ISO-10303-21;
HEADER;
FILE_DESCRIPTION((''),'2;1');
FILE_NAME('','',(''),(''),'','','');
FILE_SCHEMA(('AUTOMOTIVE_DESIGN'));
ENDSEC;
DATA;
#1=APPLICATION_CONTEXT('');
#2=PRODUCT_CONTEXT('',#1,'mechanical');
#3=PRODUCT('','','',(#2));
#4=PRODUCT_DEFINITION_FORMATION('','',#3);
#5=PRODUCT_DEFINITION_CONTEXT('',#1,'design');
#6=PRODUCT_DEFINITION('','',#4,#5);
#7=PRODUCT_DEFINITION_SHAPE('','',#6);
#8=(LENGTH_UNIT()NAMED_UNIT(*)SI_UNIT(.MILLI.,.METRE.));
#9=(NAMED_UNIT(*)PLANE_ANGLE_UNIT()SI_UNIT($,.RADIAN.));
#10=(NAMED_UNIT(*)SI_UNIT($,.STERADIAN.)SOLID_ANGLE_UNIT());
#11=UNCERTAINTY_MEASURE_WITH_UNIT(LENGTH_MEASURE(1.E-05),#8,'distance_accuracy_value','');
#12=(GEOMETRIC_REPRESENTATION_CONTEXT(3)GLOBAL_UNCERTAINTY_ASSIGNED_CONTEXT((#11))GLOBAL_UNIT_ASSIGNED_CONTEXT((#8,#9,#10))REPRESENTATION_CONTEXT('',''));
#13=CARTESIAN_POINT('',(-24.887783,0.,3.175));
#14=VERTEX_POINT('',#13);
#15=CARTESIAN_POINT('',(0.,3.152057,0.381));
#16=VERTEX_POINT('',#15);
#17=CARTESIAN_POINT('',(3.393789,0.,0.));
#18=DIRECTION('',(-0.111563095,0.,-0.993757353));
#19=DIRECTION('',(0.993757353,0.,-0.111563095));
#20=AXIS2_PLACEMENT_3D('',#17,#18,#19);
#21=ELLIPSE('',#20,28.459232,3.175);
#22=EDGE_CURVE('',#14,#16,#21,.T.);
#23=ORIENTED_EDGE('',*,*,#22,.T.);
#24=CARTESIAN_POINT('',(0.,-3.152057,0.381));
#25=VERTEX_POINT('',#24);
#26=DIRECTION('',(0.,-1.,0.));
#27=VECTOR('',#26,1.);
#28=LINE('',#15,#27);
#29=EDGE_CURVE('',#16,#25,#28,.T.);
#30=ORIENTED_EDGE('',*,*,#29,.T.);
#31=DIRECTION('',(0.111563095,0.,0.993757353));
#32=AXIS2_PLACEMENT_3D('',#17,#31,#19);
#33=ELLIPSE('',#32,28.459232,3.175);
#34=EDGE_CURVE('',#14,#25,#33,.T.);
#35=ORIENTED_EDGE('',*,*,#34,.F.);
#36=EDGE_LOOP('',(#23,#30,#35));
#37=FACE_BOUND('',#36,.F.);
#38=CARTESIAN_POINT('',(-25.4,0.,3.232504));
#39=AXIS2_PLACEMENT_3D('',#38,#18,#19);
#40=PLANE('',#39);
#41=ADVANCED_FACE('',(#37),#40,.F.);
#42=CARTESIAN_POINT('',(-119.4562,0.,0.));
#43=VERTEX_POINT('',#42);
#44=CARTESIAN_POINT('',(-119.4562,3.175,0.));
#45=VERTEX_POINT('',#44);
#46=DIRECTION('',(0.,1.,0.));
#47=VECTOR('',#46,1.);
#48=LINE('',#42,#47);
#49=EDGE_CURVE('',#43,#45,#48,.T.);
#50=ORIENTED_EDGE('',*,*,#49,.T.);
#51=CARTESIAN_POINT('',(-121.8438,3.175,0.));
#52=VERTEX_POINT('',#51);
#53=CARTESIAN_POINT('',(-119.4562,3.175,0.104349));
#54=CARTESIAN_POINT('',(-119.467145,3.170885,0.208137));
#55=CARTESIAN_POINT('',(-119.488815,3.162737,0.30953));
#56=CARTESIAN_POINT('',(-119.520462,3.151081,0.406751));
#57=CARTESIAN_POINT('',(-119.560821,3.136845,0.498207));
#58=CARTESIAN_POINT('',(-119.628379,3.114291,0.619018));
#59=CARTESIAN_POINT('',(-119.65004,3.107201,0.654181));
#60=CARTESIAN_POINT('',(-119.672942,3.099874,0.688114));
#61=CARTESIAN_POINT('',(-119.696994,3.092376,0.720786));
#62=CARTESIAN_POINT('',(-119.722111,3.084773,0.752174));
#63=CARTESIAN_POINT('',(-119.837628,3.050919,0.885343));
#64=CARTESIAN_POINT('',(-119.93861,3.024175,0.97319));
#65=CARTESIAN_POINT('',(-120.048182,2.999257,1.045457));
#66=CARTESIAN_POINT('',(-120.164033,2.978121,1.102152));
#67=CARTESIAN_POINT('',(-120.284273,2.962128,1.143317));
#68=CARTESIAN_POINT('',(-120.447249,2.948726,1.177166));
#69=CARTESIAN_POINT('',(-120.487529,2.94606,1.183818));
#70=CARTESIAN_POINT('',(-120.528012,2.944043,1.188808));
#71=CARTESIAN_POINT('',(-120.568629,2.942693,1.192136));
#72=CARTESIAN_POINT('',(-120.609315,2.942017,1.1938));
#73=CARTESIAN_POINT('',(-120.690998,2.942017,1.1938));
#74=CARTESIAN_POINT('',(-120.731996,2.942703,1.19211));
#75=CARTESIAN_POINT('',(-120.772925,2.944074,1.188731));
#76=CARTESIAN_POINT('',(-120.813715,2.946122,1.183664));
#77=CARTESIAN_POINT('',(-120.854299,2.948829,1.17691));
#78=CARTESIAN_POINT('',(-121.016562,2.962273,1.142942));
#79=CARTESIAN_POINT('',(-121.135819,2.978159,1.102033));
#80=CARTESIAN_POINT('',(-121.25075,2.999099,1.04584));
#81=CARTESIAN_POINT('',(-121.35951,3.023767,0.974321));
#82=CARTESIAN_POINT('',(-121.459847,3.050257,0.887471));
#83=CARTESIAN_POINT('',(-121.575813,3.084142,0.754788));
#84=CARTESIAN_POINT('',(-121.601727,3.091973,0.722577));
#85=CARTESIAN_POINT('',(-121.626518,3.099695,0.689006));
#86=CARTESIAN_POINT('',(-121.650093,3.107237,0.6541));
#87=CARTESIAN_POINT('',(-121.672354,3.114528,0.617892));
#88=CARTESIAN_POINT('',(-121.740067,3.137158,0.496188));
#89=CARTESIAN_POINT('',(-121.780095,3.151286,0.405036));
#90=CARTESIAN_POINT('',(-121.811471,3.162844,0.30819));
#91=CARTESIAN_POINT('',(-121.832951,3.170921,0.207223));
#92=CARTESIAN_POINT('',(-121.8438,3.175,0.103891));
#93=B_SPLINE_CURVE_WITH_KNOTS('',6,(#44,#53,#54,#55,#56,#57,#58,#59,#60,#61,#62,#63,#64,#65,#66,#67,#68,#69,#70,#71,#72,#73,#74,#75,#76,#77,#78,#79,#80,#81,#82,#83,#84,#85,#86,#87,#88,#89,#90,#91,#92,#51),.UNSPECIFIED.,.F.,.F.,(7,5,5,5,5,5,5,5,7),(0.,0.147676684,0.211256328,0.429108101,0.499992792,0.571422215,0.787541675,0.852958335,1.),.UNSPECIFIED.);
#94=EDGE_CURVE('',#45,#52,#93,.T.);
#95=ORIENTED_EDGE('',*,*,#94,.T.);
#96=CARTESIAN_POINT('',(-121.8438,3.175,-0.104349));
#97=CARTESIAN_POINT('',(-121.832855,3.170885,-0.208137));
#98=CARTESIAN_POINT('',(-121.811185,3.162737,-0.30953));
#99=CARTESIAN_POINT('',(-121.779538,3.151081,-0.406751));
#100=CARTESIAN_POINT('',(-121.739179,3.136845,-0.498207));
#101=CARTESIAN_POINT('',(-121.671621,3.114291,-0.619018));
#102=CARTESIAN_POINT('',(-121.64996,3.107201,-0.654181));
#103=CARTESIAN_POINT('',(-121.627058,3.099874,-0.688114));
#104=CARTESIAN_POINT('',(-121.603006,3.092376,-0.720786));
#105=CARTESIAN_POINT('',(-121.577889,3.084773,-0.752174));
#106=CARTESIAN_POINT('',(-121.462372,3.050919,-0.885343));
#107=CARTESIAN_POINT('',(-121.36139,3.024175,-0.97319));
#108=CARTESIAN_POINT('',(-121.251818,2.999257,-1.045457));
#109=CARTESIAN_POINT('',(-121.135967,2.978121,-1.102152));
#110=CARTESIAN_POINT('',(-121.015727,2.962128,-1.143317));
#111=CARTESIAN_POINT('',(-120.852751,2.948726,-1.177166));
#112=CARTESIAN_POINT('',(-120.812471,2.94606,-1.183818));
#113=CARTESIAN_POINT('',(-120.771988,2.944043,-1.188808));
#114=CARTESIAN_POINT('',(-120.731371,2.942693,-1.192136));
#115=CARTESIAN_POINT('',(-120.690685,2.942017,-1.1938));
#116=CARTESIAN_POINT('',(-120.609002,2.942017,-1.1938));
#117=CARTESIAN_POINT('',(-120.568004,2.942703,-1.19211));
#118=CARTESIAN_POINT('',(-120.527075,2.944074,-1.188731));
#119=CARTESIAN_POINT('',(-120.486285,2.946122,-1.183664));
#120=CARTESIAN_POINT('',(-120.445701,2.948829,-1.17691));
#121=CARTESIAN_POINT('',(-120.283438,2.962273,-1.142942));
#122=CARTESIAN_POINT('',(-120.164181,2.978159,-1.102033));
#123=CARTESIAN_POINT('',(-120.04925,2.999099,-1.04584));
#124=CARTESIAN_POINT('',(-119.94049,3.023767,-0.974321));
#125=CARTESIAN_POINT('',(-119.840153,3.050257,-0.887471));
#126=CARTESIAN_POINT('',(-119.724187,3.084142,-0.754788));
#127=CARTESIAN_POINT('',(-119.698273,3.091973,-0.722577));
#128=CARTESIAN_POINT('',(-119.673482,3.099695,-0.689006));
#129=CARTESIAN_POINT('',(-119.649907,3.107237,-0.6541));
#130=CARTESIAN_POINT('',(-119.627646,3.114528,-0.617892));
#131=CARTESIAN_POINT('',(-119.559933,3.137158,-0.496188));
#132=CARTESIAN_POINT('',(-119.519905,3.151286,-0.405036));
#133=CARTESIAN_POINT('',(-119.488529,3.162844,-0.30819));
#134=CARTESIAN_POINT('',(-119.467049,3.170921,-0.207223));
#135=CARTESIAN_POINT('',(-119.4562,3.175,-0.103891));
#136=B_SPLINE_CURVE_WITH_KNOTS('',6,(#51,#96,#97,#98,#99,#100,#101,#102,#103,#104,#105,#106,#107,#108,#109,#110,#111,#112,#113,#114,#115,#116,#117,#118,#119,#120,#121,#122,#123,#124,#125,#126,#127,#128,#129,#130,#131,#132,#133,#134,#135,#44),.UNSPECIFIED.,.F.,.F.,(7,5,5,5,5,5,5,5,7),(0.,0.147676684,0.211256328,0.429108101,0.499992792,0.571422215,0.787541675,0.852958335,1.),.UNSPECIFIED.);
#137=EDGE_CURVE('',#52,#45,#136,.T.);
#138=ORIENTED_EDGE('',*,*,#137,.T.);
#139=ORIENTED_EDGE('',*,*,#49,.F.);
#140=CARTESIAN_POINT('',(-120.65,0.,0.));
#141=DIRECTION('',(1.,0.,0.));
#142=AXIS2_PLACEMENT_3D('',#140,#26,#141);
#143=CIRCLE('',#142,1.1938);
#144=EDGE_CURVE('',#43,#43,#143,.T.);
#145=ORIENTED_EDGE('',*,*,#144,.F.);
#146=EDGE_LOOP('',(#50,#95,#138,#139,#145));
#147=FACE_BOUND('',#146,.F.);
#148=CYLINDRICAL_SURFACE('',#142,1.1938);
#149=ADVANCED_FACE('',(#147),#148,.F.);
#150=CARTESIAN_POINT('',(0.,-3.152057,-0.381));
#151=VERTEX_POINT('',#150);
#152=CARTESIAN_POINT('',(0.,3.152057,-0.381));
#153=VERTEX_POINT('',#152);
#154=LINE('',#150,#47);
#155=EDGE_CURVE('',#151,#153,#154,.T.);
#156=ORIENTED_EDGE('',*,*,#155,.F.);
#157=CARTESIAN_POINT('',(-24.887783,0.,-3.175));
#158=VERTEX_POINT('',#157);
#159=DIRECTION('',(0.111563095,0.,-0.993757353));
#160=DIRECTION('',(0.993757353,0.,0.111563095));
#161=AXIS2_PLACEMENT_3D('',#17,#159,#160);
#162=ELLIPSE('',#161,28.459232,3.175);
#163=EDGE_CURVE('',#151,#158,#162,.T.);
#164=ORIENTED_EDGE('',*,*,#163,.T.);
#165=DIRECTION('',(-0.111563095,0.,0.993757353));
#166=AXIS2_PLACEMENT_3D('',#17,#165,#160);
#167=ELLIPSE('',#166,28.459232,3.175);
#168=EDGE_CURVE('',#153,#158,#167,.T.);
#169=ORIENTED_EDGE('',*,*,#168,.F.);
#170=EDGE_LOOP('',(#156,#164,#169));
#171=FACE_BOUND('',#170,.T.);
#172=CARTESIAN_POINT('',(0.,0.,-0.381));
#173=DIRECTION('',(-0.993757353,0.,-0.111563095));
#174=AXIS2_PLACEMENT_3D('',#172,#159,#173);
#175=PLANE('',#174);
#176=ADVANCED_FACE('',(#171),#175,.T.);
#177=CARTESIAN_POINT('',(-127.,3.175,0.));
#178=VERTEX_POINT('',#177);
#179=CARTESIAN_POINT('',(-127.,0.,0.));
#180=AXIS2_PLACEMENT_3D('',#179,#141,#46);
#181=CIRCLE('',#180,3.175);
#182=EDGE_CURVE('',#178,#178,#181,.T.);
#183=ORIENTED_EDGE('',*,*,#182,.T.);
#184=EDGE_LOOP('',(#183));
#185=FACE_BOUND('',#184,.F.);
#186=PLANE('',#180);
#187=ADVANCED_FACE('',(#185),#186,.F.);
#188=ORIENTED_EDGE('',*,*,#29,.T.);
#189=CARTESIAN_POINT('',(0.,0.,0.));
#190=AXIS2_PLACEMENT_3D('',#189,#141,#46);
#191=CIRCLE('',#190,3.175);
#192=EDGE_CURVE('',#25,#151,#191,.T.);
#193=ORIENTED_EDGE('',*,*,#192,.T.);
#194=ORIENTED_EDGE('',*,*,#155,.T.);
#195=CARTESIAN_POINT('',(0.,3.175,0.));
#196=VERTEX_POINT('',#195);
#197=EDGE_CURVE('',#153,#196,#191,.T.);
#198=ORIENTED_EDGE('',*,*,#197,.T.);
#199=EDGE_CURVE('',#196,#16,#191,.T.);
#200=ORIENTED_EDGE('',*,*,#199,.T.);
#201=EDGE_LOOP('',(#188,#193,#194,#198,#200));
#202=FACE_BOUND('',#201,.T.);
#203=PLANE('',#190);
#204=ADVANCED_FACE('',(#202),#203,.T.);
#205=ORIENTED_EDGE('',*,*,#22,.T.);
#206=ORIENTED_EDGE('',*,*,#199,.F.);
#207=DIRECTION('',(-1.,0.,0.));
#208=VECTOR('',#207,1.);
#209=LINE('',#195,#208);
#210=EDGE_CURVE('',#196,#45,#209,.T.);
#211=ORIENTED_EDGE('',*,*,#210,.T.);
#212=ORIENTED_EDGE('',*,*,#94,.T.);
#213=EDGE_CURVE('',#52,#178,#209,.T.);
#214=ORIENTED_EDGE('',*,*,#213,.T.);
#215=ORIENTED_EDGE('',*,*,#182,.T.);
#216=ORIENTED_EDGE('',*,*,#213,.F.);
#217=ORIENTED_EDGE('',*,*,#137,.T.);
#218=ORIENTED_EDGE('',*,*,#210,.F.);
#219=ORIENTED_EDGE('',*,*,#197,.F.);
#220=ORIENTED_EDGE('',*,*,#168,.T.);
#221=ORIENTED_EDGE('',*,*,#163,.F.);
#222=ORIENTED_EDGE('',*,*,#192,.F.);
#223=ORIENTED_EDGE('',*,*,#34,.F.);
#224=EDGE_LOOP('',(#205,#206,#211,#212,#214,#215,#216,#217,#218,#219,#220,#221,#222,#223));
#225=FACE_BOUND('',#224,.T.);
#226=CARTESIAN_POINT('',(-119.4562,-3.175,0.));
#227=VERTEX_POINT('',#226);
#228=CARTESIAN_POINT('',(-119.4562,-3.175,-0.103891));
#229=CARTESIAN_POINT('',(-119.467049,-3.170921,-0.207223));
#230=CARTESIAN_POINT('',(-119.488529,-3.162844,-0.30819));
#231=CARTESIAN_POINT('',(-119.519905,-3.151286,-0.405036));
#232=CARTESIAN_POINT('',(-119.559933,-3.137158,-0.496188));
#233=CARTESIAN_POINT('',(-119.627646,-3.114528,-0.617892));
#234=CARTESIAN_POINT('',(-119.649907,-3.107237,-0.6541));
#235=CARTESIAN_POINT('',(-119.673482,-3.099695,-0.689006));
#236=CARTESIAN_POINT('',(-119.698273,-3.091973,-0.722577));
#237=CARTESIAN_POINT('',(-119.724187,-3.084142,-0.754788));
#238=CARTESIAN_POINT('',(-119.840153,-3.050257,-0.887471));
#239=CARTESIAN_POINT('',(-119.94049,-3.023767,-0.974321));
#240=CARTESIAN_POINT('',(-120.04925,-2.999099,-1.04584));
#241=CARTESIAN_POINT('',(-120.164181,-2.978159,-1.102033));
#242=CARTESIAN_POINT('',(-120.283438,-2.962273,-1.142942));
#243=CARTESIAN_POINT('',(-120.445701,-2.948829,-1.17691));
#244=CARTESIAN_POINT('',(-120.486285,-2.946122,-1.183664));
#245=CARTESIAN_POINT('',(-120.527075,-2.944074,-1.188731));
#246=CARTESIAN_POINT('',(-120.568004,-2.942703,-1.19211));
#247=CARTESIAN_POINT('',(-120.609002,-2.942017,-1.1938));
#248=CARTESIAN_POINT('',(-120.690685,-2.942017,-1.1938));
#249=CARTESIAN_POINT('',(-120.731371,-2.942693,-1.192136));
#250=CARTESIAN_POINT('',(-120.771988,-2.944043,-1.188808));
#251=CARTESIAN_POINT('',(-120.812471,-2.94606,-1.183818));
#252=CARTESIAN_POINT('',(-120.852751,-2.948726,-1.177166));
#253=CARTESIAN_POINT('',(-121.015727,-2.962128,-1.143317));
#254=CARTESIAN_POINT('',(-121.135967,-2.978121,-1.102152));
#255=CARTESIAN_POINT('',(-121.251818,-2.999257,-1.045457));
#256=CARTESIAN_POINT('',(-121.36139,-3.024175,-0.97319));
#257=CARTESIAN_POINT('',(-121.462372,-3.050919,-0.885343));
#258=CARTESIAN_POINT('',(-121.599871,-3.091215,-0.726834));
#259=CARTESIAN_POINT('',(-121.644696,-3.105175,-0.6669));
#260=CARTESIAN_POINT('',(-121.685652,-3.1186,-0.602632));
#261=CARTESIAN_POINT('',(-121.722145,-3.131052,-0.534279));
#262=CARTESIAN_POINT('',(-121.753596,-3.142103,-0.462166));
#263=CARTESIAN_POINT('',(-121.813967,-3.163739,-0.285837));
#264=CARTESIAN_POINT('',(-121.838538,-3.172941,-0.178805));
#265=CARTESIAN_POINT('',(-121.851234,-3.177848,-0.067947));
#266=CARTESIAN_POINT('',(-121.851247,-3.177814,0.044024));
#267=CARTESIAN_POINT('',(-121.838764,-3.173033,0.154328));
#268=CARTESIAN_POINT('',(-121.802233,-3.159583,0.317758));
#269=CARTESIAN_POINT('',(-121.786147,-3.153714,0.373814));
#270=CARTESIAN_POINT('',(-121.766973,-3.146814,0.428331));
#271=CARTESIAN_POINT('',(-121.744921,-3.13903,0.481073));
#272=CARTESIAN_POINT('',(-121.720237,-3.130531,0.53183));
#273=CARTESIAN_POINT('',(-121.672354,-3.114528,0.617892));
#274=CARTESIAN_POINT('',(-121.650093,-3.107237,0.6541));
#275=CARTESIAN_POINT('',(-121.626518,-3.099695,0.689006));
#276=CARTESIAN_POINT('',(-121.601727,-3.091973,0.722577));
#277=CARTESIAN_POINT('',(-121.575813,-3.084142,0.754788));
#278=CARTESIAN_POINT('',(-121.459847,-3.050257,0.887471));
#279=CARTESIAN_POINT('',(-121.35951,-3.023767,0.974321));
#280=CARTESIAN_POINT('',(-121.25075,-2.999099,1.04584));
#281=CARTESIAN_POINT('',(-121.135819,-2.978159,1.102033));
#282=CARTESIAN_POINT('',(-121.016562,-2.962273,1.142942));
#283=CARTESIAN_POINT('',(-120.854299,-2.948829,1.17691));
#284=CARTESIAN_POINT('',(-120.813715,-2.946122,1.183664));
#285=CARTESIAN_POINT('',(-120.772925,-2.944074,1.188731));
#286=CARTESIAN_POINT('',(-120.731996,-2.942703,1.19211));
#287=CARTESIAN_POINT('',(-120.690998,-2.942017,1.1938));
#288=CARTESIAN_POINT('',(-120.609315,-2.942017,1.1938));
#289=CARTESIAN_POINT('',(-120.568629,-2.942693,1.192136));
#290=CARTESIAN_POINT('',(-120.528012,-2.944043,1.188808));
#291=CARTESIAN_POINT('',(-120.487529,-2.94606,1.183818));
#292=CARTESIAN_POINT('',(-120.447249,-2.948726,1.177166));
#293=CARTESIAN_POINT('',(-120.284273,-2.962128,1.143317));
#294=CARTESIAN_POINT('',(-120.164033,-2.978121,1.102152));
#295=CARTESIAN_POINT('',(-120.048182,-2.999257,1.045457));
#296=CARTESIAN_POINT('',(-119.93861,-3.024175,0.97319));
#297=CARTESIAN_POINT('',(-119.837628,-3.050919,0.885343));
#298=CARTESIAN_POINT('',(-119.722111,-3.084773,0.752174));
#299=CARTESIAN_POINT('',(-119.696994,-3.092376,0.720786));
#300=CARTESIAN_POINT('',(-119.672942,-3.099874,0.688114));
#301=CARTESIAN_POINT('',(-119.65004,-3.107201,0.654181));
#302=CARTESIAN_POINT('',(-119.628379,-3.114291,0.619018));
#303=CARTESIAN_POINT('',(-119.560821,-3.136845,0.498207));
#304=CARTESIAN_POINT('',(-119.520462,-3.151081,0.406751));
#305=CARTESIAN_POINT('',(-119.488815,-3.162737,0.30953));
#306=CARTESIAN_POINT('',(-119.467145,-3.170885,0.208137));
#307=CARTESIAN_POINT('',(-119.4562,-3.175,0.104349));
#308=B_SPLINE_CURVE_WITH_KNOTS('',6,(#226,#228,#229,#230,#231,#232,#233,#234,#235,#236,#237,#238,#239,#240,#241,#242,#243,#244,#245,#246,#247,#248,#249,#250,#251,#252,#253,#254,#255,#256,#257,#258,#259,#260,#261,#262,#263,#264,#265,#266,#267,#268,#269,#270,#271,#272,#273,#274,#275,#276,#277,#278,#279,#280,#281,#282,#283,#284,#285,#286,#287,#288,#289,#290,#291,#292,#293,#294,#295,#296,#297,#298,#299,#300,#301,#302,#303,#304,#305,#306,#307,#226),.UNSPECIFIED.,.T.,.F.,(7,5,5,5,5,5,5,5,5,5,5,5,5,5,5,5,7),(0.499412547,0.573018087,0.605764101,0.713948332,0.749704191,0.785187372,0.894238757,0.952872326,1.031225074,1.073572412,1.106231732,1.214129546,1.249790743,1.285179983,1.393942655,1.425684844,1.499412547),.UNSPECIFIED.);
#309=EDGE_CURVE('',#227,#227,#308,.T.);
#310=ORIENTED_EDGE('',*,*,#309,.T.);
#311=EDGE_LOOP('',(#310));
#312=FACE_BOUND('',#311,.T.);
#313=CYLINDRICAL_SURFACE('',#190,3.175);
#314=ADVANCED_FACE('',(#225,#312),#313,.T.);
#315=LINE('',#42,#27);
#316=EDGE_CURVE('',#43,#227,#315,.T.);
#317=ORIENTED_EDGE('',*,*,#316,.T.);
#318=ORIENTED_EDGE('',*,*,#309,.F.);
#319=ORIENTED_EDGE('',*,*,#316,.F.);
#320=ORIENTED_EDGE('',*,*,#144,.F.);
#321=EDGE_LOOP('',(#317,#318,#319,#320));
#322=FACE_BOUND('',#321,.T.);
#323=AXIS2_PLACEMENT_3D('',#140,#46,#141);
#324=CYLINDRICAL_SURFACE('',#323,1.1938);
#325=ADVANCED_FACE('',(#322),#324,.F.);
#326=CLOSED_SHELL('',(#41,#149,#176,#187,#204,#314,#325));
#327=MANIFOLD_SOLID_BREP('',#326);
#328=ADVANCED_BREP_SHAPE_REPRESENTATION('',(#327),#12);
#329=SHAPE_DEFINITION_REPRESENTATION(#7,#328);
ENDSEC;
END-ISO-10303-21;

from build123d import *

# Parameters (mm, degrees)
F0_R          = 3.175
F1_DEPTH      = 127
F3_DEPTH      = 25.4
F3_DEPTH_BACK = 25.4
F4_R          = 1.1938
F6_DEPTH      = 3.175
F6_DEPTH_BACK = 3.175


# Not quite as in the source:
# - the program builds the solid bodies; features that only make, move or delete a surface that nothing else refers to are left out


with BuildPart() as f1:
    # F0 (on Right) → F1 (new body)
    with BuildSketch(Plane.YZ):
        Circle(F0_R)
    extrude(amount=-F1_DEPTH)

    # F2 (on Front) → F3 (cut, two sides)
    with BuildSketch(Plane.XZ) as f3_sk:
        Polygon((-25.4, 3.2325035427), (0, 0.381), (0, 3.2325035427), align=None)
        Polygon((0, -3.2135259826), (0, -0.381), (-25.4, -3.2325035427), align=None)
    extrude(amount=-F3_DEPTH, mode=Mode.SUBTRACT)
    extrude(f3_sk.sketch, amount=F3_DEPTH_BACK, mode=Mode.SUBTRACT)

    # F4 (on Front) → F6 (cut, two sides)
    with BuildSketch(Plane.XZ) as f6_sk:
        with Locations((-120.65, 0)):
            Circle(F4_R)
    extrude(amount=F6_DEPTH, mode=Mode.SUBTRACT)
    extrude(f6_sk.sketch, amount=-F6_DEPTH_BACK, mode=Mode.SUBTRACT)


solid = f1.part
